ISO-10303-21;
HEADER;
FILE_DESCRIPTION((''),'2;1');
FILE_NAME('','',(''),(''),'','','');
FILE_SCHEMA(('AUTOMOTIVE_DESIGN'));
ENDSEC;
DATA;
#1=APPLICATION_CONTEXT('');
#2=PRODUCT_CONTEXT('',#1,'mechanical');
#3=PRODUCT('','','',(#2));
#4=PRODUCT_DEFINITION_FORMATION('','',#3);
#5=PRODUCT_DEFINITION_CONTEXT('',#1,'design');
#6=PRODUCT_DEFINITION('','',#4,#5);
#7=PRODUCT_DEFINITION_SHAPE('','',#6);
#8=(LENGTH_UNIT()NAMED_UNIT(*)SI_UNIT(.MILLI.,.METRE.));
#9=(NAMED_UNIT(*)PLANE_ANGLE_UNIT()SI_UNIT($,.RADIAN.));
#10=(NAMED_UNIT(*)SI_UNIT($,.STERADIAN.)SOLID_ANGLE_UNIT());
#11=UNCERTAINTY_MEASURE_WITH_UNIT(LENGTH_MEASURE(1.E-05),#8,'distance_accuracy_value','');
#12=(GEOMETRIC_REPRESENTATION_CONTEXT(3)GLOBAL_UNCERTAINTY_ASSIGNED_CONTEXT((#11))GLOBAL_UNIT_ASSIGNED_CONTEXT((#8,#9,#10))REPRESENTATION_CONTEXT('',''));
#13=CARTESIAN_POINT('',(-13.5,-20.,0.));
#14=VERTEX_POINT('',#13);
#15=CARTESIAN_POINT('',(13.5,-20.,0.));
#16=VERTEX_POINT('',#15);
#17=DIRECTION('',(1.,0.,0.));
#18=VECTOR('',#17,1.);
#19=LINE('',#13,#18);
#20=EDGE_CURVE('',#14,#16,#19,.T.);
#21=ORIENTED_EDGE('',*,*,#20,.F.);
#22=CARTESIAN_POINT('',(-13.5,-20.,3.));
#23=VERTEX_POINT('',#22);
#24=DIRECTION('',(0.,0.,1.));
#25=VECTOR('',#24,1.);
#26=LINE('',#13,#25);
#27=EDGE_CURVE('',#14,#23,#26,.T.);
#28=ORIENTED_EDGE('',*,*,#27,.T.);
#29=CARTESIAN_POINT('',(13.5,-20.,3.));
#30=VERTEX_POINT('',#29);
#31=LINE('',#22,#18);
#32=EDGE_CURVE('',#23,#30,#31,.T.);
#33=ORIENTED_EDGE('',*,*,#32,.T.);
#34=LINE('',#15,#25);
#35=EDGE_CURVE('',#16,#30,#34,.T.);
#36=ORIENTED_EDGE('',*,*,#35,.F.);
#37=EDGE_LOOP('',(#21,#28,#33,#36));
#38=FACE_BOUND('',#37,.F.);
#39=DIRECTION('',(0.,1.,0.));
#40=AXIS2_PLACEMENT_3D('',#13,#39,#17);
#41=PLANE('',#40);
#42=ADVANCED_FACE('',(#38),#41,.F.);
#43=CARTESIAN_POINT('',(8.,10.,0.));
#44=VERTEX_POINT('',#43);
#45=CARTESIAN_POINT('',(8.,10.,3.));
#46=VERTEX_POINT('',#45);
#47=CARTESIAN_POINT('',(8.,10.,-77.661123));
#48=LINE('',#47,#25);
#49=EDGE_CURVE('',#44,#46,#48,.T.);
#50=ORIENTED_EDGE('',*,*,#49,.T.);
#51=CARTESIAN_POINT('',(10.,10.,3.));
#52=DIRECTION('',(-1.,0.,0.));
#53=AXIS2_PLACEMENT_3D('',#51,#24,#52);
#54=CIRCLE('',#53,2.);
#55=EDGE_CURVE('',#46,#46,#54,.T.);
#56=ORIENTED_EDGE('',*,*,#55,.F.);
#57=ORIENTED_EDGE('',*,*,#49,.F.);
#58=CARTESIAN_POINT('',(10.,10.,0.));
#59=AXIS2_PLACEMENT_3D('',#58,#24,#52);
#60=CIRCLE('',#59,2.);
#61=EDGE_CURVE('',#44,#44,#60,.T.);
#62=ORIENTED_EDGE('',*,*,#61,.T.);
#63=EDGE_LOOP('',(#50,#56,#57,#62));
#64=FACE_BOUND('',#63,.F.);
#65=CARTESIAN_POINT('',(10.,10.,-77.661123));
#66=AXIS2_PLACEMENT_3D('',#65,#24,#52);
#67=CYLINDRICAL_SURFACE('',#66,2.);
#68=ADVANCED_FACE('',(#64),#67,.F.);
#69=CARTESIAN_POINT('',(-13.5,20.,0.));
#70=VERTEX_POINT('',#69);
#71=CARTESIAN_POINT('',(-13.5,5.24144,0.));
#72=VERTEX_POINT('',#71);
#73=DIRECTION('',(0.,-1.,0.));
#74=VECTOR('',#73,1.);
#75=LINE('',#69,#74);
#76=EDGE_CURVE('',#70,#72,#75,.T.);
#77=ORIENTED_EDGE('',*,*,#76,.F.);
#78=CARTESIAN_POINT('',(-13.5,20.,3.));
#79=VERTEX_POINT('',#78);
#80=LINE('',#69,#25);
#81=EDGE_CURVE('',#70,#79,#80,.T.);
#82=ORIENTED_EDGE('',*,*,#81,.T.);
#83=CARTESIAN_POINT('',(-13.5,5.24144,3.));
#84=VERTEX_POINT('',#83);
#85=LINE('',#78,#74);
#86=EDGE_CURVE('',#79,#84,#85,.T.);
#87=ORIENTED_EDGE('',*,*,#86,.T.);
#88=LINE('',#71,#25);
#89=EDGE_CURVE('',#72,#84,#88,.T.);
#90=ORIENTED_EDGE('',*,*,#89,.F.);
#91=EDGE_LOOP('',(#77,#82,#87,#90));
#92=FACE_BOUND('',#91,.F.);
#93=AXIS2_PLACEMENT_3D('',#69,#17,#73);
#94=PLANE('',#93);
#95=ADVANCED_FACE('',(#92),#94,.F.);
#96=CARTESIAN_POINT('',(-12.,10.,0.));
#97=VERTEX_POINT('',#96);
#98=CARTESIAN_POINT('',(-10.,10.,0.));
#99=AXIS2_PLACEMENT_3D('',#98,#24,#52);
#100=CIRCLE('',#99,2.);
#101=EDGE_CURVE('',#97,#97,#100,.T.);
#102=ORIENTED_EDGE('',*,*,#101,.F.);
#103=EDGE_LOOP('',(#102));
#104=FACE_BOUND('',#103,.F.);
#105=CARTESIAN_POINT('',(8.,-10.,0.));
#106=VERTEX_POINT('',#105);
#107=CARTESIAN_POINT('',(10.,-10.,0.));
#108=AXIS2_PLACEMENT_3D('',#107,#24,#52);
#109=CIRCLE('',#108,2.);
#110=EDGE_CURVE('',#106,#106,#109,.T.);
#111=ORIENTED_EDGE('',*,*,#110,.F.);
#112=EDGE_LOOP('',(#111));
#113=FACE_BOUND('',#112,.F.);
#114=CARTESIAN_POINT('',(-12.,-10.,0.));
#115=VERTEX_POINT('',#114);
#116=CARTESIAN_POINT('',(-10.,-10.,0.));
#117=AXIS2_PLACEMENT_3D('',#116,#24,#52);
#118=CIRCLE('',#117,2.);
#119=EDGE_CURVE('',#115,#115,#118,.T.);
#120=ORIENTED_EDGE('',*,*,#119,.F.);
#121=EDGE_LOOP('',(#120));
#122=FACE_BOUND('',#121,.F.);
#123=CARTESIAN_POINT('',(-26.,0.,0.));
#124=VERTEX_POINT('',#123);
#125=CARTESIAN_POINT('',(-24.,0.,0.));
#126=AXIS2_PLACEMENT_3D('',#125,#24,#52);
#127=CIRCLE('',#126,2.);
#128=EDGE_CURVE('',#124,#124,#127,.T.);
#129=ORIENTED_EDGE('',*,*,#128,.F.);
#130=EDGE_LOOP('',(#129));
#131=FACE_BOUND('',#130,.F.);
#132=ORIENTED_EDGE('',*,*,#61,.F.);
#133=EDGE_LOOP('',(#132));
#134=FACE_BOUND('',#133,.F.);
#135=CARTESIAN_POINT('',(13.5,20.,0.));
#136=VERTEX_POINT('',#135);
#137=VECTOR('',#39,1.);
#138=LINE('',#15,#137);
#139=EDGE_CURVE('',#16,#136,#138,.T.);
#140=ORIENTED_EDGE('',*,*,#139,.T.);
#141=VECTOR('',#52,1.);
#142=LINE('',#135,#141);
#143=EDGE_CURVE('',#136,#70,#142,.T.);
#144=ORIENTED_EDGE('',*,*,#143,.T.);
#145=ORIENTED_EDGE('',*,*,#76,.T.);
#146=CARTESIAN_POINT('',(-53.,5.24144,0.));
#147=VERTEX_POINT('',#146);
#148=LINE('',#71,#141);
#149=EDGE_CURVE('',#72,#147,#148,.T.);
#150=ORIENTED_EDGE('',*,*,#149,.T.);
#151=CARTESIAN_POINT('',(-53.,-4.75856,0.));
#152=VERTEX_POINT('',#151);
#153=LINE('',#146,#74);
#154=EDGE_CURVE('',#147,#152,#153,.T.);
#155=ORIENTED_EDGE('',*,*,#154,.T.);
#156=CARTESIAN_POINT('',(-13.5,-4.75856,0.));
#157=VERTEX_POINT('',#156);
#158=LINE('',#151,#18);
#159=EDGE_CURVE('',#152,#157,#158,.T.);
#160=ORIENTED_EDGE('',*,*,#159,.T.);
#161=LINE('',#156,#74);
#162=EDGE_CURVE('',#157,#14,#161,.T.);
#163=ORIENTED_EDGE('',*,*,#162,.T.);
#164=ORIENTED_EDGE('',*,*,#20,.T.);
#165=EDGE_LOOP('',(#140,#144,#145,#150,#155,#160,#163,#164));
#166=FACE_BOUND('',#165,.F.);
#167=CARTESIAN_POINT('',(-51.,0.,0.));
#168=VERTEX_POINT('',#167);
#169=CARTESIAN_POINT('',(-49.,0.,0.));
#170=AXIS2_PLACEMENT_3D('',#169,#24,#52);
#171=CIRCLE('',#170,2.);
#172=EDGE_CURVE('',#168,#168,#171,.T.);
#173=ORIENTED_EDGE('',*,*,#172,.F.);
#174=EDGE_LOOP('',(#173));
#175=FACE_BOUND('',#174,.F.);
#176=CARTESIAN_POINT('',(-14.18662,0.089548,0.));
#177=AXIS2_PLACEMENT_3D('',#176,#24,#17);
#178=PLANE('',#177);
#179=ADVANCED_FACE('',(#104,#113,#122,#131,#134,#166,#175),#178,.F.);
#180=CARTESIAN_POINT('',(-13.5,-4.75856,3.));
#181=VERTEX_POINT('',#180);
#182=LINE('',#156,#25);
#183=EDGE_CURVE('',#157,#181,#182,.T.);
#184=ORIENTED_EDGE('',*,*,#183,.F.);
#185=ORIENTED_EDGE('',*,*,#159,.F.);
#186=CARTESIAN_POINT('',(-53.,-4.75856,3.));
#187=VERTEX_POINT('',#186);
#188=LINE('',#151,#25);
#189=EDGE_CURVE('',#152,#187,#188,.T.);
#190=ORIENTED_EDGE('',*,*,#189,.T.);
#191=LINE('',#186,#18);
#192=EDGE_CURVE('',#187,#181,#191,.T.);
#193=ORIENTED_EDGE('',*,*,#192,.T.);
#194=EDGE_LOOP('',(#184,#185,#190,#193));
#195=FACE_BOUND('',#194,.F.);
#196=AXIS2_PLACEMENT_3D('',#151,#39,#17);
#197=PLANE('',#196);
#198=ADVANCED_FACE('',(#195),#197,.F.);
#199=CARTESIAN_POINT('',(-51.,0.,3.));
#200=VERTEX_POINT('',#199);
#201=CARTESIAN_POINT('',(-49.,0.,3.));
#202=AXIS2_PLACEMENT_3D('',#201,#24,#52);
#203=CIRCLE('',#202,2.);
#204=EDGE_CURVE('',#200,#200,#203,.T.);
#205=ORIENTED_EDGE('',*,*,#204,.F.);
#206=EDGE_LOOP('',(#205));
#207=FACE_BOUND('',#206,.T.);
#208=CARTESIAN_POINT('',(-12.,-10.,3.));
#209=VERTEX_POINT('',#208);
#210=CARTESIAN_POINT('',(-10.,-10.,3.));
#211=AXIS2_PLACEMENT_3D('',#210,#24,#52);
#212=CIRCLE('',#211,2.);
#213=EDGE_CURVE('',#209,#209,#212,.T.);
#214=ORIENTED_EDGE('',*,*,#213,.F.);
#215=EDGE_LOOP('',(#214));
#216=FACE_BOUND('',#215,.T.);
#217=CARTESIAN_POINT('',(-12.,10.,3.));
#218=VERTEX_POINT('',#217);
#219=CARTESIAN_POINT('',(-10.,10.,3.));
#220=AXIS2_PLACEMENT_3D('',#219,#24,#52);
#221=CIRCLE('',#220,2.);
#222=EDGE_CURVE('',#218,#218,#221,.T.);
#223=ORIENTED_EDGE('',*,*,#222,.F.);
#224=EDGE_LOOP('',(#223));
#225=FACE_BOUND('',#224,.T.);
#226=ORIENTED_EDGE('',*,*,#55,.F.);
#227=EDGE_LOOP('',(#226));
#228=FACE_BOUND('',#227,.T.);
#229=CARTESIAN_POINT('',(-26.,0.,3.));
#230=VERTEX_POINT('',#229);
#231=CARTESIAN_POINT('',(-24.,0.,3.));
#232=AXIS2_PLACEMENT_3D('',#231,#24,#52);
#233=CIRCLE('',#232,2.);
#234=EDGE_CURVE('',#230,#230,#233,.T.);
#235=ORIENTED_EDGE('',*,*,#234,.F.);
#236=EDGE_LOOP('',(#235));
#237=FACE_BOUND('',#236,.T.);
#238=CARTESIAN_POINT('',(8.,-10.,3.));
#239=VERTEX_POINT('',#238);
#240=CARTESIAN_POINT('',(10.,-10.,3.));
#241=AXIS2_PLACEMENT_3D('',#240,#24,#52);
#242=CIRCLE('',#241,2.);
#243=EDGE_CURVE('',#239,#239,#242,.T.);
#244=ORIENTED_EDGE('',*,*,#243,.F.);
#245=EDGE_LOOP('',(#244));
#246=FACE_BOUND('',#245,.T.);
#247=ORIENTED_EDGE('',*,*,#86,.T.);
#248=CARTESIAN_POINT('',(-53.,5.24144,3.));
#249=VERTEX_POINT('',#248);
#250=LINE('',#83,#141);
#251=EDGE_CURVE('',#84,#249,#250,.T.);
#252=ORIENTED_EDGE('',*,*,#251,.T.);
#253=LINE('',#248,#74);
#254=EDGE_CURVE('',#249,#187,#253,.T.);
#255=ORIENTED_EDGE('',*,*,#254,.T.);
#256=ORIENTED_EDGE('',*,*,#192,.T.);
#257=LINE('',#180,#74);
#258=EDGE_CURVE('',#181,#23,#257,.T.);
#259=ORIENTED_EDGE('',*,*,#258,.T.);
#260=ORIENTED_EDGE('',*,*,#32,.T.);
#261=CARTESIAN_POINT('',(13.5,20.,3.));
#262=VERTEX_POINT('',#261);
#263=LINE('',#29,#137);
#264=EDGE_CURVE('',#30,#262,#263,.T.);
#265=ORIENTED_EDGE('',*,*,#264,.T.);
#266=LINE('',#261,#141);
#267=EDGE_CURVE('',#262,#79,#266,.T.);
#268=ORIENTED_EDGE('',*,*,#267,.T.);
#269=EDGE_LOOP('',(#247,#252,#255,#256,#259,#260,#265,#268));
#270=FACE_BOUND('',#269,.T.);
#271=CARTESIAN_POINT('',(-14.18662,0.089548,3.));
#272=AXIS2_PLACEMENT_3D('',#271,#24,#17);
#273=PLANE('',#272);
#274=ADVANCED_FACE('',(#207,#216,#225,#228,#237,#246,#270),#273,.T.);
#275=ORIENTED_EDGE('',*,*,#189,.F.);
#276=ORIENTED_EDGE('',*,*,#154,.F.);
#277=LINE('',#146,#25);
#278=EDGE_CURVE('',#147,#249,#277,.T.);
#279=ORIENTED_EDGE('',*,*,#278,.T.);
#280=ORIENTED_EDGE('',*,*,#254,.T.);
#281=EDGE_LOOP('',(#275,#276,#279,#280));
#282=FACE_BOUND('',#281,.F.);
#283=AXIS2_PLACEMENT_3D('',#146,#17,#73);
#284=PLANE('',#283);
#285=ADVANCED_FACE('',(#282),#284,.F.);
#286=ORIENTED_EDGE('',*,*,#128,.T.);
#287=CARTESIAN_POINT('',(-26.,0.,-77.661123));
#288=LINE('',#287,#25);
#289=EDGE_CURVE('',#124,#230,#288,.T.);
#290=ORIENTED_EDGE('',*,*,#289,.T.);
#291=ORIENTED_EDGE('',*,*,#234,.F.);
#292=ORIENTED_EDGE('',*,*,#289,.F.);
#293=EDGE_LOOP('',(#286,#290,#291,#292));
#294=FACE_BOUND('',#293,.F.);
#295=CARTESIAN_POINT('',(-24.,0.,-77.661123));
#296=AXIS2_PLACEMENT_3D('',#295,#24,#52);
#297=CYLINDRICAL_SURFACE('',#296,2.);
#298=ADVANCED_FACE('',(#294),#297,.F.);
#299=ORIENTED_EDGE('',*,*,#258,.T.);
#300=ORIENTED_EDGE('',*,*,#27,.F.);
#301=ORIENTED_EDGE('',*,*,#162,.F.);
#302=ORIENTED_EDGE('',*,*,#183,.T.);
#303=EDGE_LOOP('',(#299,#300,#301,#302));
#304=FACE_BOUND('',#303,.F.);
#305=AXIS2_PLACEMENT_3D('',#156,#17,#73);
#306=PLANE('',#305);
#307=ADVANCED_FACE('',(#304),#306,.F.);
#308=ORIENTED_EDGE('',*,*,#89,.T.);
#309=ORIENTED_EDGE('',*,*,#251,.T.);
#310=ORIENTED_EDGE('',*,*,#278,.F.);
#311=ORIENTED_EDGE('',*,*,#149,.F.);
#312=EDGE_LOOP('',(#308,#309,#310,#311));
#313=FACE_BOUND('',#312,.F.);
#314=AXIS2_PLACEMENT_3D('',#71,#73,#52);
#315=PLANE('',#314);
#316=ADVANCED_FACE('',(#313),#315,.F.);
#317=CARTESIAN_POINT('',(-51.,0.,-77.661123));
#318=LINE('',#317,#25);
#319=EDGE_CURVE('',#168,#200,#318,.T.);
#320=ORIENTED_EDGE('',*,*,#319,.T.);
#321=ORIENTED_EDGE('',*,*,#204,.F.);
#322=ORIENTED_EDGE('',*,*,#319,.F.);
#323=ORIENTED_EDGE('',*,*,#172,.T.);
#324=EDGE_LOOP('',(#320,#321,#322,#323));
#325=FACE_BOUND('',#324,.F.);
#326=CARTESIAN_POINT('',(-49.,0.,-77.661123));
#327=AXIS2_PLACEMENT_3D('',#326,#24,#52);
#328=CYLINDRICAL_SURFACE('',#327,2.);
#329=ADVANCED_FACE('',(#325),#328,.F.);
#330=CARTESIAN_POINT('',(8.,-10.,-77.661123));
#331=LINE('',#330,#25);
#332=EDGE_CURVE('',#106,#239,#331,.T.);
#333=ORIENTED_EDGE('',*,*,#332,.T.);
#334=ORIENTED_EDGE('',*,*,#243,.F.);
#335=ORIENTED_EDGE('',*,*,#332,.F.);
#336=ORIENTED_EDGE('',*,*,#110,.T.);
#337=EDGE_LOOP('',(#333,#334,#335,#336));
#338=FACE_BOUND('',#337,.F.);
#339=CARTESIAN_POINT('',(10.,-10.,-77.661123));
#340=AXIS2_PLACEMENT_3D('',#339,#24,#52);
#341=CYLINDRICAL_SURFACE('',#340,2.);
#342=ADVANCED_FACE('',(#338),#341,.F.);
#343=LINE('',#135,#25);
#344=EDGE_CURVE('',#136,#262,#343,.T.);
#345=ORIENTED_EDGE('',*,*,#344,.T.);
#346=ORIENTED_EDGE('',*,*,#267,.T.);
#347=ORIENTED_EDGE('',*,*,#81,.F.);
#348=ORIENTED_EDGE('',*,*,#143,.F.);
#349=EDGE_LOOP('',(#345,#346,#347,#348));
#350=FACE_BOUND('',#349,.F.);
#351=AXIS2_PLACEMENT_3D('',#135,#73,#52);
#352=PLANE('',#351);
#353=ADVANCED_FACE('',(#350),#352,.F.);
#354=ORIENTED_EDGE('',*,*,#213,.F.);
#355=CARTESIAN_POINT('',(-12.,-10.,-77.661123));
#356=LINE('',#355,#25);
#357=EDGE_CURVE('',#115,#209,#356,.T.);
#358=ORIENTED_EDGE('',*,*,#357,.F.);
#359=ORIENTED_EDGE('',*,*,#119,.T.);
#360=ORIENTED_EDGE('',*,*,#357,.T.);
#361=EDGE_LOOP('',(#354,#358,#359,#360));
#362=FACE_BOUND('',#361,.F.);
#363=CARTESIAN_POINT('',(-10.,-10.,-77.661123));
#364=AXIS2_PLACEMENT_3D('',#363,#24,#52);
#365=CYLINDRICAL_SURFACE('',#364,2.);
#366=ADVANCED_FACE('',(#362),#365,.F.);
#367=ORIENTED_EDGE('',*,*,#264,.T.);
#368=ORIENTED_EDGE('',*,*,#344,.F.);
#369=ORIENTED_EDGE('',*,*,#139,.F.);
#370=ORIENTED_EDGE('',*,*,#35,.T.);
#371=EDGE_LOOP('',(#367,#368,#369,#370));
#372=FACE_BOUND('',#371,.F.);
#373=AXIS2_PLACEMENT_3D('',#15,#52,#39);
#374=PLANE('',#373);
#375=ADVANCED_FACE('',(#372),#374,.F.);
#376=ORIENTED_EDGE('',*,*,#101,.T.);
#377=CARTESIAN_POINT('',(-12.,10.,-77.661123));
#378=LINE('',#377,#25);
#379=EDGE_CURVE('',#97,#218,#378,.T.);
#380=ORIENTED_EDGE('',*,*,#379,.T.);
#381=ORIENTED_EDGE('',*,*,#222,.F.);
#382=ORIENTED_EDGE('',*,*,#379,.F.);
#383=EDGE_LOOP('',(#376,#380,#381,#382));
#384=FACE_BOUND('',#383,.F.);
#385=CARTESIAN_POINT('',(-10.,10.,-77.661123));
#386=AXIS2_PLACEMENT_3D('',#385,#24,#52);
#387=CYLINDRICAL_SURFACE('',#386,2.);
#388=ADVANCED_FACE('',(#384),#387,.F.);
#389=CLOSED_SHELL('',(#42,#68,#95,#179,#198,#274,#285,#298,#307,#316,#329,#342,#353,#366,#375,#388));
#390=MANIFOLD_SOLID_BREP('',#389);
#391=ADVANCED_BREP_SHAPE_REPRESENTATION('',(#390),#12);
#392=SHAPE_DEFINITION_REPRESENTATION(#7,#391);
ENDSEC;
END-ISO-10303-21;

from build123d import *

# Parameters (mm, degrees)
F1_DEPTH = 3
F2_D     = 4


with BuildPart() as f1:
    # F0 (on Top) → F1 (new body)
    with BuildSketch(Plane.XY):
        Polygon((-13.5, -20), (13.5, -20), (13.5, 20), (-13.5, 20), (-13.5, 5.2414399013), (-53, 5.2414399013), (-53, -4.7585600987), (-13.5, -4.7585600987), align=None)
    extrude(amount=F1_DEPTH)

    # F2 (through all)
    with Locations(Plane(origin=(0, 0, 0), x_dir=(1, 0, 0), z_dir=(0, 0, -1))):
        with Locations((-49, 0), (-24, 0), (-10, 10), (10, -10), (10, 10), (-10, -10)):
            Hole(F2_D / 2)


solid = f1.part
